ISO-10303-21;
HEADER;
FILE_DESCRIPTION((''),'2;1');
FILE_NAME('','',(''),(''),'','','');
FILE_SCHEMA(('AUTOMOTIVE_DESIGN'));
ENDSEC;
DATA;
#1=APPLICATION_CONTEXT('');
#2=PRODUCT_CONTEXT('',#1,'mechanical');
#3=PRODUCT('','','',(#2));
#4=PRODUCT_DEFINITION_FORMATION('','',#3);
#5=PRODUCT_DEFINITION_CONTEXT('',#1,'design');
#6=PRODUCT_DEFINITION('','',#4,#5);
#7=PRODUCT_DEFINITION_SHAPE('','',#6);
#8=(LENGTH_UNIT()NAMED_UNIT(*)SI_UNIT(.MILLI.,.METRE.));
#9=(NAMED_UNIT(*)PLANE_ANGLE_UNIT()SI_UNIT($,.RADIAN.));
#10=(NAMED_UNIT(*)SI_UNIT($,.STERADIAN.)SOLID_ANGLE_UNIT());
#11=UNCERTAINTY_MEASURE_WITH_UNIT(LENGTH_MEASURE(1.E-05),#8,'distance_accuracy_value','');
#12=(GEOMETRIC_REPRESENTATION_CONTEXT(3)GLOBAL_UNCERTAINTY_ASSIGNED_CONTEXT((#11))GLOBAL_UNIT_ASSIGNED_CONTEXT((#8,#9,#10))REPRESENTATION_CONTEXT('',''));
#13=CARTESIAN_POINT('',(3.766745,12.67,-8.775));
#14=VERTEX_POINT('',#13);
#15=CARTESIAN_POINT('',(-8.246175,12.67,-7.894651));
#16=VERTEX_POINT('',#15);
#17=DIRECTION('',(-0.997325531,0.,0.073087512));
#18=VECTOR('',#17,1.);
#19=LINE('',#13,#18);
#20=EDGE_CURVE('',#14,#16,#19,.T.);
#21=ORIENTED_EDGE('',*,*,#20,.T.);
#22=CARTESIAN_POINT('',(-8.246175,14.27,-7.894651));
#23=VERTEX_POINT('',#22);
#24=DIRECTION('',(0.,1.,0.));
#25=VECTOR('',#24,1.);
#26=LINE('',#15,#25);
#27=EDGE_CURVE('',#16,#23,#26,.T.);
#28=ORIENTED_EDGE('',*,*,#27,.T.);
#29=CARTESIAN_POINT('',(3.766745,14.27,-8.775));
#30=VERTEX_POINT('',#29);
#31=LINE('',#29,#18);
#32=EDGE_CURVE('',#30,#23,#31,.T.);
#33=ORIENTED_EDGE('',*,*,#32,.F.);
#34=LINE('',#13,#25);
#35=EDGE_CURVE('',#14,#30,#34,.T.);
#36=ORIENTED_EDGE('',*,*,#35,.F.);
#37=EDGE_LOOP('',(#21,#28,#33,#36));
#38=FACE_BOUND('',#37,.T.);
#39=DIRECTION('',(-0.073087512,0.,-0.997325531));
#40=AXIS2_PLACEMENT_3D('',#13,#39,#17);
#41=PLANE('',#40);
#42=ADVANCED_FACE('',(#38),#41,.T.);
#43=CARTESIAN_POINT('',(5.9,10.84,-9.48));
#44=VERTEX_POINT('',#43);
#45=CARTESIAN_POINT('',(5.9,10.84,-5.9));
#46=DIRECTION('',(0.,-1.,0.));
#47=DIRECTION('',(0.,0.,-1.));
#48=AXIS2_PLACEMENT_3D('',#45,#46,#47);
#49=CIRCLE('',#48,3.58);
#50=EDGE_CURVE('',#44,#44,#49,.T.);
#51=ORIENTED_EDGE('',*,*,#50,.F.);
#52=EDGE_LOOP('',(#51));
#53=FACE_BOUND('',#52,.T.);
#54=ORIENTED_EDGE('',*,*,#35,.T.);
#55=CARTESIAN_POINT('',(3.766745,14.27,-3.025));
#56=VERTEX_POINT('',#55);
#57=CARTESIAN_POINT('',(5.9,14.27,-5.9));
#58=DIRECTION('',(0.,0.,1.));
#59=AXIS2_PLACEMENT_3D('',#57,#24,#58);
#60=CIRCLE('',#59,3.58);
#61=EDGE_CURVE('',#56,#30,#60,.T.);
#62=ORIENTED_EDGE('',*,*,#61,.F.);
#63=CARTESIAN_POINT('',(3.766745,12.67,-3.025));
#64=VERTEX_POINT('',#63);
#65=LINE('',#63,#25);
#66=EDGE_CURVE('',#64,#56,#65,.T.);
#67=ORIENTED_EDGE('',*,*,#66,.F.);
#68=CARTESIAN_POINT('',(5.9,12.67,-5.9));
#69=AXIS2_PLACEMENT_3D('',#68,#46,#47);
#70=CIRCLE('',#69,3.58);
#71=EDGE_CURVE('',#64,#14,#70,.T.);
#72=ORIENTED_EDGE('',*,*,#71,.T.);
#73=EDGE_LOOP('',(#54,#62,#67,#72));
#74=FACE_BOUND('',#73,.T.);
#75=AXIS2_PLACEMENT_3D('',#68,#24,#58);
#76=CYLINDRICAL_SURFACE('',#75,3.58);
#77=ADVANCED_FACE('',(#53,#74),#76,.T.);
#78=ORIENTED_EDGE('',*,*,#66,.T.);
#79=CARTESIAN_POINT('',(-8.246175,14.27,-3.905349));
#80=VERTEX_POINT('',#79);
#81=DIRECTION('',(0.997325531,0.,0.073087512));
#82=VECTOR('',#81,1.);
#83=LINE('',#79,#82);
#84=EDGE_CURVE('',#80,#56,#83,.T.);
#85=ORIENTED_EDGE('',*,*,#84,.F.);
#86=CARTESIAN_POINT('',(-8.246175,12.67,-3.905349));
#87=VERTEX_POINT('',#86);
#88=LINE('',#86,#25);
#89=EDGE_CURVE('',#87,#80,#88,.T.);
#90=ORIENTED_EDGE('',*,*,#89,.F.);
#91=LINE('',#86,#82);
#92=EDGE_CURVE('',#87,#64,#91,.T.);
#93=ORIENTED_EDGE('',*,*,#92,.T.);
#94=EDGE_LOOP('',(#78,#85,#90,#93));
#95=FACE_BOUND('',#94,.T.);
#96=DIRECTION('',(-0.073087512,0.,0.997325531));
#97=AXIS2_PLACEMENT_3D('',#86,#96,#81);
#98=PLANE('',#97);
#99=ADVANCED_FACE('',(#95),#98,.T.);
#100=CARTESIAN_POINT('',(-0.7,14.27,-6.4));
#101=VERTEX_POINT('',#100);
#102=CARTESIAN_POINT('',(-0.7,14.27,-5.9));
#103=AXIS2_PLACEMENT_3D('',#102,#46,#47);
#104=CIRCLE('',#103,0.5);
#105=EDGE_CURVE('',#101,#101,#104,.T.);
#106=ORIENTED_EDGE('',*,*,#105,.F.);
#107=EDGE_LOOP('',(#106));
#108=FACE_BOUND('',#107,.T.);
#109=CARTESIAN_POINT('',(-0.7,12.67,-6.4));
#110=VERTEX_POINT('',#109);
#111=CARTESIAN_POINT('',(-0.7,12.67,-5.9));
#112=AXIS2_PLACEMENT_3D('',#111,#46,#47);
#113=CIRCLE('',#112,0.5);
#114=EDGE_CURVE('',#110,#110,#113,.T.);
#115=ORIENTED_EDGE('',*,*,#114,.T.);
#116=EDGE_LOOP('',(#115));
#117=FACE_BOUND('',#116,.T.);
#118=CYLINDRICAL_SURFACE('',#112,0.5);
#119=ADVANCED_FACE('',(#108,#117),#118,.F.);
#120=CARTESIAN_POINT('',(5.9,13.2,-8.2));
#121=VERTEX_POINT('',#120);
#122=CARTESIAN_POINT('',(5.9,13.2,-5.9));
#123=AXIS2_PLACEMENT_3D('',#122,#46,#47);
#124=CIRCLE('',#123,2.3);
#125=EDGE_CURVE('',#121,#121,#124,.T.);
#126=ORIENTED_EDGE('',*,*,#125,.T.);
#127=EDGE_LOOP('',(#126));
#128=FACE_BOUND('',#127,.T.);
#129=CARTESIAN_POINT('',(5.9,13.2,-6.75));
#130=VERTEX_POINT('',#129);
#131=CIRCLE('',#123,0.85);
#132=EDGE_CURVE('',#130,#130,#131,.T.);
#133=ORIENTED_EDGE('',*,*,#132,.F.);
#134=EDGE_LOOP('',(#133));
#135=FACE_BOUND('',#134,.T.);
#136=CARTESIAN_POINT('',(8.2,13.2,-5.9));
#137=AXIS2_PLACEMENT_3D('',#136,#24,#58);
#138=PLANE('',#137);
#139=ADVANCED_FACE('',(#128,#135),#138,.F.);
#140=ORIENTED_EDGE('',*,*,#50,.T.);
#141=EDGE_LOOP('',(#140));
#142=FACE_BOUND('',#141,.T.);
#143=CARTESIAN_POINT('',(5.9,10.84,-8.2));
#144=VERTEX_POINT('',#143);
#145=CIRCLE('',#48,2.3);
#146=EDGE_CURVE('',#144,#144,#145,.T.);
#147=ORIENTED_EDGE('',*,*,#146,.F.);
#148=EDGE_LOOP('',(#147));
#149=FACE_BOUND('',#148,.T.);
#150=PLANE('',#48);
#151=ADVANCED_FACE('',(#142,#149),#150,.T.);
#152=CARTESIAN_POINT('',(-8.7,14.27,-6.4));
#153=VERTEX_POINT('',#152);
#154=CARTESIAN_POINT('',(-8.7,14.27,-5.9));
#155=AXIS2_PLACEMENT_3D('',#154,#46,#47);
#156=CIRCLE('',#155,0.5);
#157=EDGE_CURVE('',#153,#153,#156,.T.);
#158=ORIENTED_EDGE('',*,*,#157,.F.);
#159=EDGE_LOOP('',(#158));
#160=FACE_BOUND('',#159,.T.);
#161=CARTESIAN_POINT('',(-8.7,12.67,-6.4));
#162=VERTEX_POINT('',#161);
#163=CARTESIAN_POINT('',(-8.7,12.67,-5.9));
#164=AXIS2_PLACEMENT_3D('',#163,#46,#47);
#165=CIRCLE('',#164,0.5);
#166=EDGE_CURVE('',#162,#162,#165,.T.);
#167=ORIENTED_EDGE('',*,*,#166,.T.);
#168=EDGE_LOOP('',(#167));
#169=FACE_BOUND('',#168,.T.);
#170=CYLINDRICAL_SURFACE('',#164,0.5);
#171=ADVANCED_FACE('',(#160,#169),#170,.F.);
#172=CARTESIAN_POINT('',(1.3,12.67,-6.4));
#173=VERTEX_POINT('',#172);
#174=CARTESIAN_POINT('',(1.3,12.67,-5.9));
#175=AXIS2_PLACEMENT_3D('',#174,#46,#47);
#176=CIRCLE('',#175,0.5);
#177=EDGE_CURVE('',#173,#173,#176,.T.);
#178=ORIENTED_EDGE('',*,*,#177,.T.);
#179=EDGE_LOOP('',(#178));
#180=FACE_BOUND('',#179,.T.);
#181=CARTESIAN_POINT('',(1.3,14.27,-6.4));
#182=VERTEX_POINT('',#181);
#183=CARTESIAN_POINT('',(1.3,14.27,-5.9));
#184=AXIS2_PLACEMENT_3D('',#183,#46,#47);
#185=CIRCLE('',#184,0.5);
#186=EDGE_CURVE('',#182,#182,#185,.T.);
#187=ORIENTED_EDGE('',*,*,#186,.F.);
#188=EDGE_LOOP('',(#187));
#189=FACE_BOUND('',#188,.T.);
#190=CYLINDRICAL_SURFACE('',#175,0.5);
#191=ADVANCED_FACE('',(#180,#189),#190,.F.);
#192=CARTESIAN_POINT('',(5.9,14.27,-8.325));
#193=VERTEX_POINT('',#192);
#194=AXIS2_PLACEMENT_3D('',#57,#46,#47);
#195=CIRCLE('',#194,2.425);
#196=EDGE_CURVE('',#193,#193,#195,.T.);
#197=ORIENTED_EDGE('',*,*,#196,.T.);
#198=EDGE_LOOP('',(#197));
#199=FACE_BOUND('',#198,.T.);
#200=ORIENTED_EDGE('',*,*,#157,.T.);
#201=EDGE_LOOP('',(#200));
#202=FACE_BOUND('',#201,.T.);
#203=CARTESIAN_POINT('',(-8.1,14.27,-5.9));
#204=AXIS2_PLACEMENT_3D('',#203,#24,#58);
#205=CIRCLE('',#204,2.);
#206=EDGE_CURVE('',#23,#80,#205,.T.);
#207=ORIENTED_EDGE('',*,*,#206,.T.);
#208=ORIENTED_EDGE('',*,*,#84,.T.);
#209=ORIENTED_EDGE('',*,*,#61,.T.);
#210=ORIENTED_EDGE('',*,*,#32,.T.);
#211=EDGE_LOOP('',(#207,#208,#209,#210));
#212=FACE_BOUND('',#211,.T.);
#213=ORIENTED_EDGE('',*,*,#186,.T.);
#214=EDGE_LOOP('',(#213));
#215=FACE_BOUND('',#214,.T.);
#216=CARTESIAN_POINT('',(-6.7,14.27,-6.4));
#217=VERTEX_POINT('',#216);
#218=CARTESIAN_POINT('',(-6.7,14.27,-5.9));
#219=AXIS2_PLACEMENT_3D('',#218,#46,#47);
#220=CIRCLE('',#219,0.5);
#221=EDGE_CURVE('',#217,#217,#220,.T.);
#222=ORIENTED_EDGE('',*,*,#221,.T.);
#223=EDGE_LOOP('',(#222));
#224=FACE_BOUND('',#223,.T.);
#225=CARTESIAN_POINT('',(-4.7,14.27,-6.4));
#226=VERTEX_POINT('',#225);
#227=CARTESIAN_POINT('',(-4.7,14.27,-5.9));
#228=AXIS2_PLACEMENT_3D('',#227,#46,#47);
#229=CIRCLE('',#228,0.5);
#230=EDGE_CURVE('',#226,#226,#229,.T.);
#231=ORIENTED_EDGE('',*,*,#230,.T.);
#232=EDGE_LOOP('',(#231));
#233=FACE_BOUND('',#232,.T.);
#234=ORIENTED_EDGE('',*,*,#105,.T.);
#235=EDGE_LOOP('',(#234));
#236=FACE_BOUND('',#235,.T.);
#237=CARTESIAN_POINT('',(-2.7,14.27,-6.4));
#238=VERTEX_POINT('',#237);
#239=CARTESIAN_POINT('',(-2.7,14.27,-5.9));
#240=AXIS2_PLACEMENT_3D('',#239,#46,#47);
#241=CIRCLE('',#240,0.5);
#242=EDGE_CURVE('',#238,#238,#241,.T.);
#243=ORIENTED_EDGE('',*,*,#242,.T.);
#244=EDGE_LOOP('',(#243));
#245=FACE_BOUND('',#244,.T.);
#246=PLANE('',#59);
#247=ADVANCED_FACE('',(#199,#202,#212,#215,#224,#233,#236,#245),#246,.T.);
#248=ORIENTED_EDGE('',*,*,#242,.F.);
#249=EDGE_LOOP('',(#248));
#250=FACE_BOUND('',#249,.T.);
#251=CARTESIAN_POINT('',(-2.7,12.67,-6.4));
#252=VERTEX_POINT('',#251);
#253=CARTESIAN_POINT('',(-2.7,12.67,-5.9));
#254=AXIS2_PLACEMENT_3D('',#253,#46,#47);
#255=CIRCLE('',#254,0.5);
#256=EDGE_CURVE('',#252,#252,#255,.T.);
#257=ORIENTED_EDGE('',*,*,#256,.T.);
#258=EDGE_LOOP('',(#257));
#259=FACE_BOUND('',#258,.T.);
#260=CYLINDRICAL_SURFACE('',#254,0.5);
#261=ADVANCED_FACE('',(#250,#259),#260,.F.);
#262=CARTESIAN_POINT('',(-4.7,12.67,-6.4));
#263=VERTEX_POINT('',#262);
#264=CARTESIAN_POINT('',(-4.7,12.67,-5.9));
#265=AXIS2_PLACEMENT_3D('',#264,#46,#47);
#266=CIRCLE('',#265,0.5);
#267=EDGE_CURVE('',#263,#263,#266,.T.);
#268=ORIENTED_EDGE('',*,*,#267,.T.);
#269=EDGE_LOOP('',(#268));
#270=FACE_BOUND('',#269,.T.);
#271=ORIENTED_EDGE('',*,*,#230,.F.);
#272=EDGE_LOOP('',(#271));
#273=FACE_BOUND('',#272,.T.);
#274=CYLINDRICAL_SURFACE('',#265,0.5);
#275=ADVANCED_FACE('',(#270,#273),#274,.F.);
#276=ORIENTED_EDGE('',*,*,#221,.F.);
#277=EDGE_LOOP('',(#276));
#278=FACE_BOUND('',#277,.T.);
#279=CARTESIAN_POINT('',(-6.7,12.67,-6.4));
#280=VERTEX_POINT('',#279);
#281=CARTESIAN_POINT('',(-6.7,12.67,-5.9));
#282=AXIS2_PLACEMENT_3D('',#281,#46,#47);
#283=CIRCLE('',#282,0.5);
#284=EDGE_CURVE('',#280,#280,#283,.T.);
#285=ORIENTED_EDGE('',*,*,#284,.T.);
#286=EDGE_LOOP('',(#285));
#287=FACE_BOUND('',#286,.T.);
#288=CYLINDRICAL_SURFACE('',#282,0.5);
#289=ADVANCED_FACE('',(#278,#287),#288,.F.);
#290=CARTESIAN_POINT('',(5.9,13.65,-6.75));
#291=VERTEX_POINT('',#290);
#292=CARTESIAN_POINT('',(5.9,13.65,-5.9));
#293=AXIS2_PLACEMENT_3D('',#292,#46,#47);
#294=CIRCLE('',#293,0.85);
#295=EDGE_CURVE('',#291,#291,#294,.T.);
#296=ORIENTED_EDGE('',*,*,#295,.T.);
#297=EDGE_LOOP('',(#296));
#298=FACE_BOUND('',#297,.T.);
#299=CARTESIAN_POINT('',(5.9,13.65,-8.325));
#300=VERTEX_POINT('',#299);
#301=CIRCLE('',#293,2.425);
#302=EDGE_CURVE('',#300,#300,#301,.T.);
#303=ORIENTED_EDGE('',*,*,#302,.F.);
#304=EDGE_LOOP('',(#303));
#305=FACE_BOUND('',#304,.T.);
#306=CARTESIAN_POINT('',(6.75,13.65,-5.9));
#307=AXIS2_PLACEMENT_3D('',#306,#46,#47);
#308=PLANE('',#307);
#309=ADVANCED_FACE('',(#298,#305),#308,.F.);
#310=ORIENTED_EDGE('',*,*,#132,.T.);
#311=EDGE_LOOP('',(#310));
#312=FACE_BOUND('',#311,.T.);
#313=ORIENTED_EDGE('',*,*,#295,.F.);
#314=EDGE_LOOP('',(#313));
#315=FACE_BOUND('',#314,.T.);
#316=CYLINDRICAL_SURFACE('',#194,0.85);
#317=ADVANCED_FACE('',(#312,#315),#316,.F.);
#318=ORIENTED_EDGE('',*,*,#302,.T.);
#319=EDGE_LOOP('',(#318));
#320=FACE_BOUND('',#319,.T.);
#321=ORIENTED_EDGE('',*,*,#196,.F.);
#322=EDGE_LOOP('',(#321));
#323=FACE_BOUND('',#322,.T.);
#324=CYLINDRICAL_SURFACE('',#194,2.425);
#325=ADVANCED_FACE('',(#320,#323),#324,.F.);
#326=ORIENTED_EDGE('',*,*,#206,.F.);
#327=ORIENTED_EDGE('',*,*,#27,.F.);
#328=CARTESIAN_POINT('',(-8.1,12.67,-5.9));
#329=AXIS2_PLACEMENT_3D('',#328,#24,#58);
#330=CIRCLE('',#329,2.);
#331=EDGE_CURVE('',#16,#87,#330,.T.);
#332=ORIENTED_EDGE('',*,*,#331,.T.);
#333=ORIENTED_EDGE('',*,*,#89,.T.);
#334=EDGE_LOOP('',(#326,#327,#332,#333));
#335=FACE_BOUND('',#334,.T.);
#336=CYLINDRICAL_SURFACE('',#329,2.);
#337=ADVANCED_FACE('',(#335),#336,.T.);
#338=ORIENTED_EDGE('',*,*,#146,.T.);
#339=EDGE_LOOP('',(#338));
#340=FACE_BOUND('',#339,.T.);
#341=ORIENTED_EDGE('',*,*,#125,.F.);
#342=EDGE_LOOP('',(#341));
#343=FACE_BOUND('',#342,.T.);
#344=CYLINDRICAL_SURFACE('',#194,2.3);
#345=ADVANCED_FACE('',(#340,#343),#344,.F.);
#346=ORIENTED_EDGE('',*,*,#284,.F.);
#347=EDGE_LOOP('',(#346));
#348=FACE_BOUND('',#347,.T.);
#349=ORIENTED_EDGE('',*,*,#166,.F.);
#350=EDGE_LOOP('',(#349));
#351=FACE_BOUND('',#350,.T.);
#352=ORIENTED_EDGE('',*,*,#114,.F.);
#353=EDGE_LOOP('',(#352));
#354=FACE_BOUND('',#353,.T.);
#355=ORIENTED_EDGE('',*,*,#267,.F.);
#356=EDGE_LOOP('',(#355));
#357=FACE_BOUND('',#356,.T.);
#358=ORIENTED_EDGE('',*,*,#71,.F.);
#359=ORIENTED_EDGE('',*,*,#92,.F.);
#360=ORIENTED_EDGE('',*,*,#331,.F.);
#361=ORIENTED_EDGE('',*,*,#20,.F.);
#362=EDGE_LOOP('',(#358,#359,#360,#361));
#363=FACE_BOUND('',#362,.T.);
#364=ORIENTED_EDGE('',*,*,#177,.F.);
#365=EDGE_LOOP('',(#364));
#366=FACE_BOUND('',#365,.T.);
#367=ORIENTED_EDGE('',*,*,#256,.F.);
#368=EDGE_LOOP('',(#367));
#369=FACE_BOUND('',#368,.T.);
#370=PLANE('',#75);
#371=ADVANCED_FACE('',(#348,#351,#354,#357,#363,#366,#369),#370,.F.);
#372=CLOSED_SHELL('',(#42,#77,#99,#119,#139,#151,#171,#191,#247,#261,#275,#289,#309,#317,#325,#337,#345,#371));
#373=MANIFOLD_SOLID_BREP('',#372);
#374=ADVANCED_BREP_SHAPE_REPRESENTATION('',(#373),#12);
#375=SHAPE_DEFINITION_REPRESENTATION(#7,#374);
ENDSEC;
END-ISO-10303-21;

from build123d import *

# Parameters (mm, degrees)
SALIENTE_EXTRUIR1_DEPTH       = 1.6
CROQUIS2_R                    = 3.58
SALIENTE_EXTRUIR2_DEPTH       = 1.83
DI_METRO_DE_TALADRO_1_0_1_1_D = 1
CORTAR_EXTRUIR1_DEPTH         = 25.109029429


with BuildPart() as part:
    # Croquis1 → Saliente-Extruir1 (new body)
    with BuildSketch(Plane(origin=(0, 14.27, 0), x_dir=(1, 0, 0), z_dir=(0, 1, 0))):
        with BuildLine():
            Line((8.033254556, 3.025), (20.046175024, 3.905348937))
            ThreePointArc((20.046175024, 3.905348937), (21.9, 5.9), (20.046175024, 7.894651063))
            Line((20.046175024, 7.894651063), (8.033254556, 8.775))
            ThreePointArc((8.033254556, 8.775), (5.9, 9.48), (3.766745444, 8.775))
            Line((3.766745444, 8.775), (-8.246175024, 7.894651063))
            ThreePointArc((-8.246175024, 7.894651063), (-10.1, 5.9), (-8.246175024, 3.905348937))
            Line((-8.246175024, 3.905348937), (3.766745444, 3.025))
            ThreePointArc((3.766745444, 3.025), (5.9, 2.32), (8.033254556, 3.025))
        make_face()
    extrude(amount=-SALIENTE_EXTRUIR1_DEPTH)

    # Croquis2 → Saliente-Extruir2 (add)
    with BuildSketch(Plane.XZ.offset(-12.67)):
        with Locations((5.9, -5.9)):
            Circle(CROQUIS2_R)
    extrude(amount=SALIENTE_EXTRUIR2_DEPTH)

    # Croquis3 → Cortar-Revolución1 (revolve, cut)
    with BuildSketch(Plane.XY.offset(-5.9)):
        Polygon((8.325, 14.27), (5.9, 14.27), (5.9, 10.84), (8.2, 10.84), (8.2, 13.2), (6.75, 13.2), (6.75, 13.65), (8.325, 13.65), align=None)
    revolve(axis=Axis((5.9, 14.27, -5.9), (0, -1, 0)), mode=Mode.SUBTRACT)

    # Diámetro de taladro Ø1.0 (1)1 (through all)
    with Locations(Plane(origin=(0, 12.67, 0), x_dir=(-1, 0, 0), z_dir=(0, -1, 0))):
        with Locations((2.7, 5.9), (6.7, 5.9), (8.7, 5.9), (4.7, 5.9), (0.7, 5.9), (-10.5, 5.9), (-14.5, 5.9), (-18.5, 5.9), (-20.5, 5.9), (-16.5, 5.9), (-12.5, 5.9), (-1.3, 5.9)):
            Hole(DI_METRO_DE_TALADRO_1_0_1_1_D / 2)

    # Croquis6 → Cortar-Extruir1 (cut, through all)
    with BuildSketch(Plane.XZ.offset(-10.84)):
        with BuildLine():
            Line((5.9, -9.48), (5.9, -13.293160377))
            Line((5.9, -13.293160377), (27.115989236, -13.293160377))
            Line((27.115989236, -13.293160377), (27.115989236, 2.204986014))
            Line((27.115989236, 2.204986014), (5.9, 2.204986014))
            Line((5.9, 2.204986014), (5.9, -2.32))
            ThreePointArc((5.9, -2.32), (9.48, -5.9), (5.9, -9.48))
        make_face()
    extrude(amount=-CORTAR_EXTRUIR1_DEPTH, mode=Mode.SUBTRACT)


solid = part.part
